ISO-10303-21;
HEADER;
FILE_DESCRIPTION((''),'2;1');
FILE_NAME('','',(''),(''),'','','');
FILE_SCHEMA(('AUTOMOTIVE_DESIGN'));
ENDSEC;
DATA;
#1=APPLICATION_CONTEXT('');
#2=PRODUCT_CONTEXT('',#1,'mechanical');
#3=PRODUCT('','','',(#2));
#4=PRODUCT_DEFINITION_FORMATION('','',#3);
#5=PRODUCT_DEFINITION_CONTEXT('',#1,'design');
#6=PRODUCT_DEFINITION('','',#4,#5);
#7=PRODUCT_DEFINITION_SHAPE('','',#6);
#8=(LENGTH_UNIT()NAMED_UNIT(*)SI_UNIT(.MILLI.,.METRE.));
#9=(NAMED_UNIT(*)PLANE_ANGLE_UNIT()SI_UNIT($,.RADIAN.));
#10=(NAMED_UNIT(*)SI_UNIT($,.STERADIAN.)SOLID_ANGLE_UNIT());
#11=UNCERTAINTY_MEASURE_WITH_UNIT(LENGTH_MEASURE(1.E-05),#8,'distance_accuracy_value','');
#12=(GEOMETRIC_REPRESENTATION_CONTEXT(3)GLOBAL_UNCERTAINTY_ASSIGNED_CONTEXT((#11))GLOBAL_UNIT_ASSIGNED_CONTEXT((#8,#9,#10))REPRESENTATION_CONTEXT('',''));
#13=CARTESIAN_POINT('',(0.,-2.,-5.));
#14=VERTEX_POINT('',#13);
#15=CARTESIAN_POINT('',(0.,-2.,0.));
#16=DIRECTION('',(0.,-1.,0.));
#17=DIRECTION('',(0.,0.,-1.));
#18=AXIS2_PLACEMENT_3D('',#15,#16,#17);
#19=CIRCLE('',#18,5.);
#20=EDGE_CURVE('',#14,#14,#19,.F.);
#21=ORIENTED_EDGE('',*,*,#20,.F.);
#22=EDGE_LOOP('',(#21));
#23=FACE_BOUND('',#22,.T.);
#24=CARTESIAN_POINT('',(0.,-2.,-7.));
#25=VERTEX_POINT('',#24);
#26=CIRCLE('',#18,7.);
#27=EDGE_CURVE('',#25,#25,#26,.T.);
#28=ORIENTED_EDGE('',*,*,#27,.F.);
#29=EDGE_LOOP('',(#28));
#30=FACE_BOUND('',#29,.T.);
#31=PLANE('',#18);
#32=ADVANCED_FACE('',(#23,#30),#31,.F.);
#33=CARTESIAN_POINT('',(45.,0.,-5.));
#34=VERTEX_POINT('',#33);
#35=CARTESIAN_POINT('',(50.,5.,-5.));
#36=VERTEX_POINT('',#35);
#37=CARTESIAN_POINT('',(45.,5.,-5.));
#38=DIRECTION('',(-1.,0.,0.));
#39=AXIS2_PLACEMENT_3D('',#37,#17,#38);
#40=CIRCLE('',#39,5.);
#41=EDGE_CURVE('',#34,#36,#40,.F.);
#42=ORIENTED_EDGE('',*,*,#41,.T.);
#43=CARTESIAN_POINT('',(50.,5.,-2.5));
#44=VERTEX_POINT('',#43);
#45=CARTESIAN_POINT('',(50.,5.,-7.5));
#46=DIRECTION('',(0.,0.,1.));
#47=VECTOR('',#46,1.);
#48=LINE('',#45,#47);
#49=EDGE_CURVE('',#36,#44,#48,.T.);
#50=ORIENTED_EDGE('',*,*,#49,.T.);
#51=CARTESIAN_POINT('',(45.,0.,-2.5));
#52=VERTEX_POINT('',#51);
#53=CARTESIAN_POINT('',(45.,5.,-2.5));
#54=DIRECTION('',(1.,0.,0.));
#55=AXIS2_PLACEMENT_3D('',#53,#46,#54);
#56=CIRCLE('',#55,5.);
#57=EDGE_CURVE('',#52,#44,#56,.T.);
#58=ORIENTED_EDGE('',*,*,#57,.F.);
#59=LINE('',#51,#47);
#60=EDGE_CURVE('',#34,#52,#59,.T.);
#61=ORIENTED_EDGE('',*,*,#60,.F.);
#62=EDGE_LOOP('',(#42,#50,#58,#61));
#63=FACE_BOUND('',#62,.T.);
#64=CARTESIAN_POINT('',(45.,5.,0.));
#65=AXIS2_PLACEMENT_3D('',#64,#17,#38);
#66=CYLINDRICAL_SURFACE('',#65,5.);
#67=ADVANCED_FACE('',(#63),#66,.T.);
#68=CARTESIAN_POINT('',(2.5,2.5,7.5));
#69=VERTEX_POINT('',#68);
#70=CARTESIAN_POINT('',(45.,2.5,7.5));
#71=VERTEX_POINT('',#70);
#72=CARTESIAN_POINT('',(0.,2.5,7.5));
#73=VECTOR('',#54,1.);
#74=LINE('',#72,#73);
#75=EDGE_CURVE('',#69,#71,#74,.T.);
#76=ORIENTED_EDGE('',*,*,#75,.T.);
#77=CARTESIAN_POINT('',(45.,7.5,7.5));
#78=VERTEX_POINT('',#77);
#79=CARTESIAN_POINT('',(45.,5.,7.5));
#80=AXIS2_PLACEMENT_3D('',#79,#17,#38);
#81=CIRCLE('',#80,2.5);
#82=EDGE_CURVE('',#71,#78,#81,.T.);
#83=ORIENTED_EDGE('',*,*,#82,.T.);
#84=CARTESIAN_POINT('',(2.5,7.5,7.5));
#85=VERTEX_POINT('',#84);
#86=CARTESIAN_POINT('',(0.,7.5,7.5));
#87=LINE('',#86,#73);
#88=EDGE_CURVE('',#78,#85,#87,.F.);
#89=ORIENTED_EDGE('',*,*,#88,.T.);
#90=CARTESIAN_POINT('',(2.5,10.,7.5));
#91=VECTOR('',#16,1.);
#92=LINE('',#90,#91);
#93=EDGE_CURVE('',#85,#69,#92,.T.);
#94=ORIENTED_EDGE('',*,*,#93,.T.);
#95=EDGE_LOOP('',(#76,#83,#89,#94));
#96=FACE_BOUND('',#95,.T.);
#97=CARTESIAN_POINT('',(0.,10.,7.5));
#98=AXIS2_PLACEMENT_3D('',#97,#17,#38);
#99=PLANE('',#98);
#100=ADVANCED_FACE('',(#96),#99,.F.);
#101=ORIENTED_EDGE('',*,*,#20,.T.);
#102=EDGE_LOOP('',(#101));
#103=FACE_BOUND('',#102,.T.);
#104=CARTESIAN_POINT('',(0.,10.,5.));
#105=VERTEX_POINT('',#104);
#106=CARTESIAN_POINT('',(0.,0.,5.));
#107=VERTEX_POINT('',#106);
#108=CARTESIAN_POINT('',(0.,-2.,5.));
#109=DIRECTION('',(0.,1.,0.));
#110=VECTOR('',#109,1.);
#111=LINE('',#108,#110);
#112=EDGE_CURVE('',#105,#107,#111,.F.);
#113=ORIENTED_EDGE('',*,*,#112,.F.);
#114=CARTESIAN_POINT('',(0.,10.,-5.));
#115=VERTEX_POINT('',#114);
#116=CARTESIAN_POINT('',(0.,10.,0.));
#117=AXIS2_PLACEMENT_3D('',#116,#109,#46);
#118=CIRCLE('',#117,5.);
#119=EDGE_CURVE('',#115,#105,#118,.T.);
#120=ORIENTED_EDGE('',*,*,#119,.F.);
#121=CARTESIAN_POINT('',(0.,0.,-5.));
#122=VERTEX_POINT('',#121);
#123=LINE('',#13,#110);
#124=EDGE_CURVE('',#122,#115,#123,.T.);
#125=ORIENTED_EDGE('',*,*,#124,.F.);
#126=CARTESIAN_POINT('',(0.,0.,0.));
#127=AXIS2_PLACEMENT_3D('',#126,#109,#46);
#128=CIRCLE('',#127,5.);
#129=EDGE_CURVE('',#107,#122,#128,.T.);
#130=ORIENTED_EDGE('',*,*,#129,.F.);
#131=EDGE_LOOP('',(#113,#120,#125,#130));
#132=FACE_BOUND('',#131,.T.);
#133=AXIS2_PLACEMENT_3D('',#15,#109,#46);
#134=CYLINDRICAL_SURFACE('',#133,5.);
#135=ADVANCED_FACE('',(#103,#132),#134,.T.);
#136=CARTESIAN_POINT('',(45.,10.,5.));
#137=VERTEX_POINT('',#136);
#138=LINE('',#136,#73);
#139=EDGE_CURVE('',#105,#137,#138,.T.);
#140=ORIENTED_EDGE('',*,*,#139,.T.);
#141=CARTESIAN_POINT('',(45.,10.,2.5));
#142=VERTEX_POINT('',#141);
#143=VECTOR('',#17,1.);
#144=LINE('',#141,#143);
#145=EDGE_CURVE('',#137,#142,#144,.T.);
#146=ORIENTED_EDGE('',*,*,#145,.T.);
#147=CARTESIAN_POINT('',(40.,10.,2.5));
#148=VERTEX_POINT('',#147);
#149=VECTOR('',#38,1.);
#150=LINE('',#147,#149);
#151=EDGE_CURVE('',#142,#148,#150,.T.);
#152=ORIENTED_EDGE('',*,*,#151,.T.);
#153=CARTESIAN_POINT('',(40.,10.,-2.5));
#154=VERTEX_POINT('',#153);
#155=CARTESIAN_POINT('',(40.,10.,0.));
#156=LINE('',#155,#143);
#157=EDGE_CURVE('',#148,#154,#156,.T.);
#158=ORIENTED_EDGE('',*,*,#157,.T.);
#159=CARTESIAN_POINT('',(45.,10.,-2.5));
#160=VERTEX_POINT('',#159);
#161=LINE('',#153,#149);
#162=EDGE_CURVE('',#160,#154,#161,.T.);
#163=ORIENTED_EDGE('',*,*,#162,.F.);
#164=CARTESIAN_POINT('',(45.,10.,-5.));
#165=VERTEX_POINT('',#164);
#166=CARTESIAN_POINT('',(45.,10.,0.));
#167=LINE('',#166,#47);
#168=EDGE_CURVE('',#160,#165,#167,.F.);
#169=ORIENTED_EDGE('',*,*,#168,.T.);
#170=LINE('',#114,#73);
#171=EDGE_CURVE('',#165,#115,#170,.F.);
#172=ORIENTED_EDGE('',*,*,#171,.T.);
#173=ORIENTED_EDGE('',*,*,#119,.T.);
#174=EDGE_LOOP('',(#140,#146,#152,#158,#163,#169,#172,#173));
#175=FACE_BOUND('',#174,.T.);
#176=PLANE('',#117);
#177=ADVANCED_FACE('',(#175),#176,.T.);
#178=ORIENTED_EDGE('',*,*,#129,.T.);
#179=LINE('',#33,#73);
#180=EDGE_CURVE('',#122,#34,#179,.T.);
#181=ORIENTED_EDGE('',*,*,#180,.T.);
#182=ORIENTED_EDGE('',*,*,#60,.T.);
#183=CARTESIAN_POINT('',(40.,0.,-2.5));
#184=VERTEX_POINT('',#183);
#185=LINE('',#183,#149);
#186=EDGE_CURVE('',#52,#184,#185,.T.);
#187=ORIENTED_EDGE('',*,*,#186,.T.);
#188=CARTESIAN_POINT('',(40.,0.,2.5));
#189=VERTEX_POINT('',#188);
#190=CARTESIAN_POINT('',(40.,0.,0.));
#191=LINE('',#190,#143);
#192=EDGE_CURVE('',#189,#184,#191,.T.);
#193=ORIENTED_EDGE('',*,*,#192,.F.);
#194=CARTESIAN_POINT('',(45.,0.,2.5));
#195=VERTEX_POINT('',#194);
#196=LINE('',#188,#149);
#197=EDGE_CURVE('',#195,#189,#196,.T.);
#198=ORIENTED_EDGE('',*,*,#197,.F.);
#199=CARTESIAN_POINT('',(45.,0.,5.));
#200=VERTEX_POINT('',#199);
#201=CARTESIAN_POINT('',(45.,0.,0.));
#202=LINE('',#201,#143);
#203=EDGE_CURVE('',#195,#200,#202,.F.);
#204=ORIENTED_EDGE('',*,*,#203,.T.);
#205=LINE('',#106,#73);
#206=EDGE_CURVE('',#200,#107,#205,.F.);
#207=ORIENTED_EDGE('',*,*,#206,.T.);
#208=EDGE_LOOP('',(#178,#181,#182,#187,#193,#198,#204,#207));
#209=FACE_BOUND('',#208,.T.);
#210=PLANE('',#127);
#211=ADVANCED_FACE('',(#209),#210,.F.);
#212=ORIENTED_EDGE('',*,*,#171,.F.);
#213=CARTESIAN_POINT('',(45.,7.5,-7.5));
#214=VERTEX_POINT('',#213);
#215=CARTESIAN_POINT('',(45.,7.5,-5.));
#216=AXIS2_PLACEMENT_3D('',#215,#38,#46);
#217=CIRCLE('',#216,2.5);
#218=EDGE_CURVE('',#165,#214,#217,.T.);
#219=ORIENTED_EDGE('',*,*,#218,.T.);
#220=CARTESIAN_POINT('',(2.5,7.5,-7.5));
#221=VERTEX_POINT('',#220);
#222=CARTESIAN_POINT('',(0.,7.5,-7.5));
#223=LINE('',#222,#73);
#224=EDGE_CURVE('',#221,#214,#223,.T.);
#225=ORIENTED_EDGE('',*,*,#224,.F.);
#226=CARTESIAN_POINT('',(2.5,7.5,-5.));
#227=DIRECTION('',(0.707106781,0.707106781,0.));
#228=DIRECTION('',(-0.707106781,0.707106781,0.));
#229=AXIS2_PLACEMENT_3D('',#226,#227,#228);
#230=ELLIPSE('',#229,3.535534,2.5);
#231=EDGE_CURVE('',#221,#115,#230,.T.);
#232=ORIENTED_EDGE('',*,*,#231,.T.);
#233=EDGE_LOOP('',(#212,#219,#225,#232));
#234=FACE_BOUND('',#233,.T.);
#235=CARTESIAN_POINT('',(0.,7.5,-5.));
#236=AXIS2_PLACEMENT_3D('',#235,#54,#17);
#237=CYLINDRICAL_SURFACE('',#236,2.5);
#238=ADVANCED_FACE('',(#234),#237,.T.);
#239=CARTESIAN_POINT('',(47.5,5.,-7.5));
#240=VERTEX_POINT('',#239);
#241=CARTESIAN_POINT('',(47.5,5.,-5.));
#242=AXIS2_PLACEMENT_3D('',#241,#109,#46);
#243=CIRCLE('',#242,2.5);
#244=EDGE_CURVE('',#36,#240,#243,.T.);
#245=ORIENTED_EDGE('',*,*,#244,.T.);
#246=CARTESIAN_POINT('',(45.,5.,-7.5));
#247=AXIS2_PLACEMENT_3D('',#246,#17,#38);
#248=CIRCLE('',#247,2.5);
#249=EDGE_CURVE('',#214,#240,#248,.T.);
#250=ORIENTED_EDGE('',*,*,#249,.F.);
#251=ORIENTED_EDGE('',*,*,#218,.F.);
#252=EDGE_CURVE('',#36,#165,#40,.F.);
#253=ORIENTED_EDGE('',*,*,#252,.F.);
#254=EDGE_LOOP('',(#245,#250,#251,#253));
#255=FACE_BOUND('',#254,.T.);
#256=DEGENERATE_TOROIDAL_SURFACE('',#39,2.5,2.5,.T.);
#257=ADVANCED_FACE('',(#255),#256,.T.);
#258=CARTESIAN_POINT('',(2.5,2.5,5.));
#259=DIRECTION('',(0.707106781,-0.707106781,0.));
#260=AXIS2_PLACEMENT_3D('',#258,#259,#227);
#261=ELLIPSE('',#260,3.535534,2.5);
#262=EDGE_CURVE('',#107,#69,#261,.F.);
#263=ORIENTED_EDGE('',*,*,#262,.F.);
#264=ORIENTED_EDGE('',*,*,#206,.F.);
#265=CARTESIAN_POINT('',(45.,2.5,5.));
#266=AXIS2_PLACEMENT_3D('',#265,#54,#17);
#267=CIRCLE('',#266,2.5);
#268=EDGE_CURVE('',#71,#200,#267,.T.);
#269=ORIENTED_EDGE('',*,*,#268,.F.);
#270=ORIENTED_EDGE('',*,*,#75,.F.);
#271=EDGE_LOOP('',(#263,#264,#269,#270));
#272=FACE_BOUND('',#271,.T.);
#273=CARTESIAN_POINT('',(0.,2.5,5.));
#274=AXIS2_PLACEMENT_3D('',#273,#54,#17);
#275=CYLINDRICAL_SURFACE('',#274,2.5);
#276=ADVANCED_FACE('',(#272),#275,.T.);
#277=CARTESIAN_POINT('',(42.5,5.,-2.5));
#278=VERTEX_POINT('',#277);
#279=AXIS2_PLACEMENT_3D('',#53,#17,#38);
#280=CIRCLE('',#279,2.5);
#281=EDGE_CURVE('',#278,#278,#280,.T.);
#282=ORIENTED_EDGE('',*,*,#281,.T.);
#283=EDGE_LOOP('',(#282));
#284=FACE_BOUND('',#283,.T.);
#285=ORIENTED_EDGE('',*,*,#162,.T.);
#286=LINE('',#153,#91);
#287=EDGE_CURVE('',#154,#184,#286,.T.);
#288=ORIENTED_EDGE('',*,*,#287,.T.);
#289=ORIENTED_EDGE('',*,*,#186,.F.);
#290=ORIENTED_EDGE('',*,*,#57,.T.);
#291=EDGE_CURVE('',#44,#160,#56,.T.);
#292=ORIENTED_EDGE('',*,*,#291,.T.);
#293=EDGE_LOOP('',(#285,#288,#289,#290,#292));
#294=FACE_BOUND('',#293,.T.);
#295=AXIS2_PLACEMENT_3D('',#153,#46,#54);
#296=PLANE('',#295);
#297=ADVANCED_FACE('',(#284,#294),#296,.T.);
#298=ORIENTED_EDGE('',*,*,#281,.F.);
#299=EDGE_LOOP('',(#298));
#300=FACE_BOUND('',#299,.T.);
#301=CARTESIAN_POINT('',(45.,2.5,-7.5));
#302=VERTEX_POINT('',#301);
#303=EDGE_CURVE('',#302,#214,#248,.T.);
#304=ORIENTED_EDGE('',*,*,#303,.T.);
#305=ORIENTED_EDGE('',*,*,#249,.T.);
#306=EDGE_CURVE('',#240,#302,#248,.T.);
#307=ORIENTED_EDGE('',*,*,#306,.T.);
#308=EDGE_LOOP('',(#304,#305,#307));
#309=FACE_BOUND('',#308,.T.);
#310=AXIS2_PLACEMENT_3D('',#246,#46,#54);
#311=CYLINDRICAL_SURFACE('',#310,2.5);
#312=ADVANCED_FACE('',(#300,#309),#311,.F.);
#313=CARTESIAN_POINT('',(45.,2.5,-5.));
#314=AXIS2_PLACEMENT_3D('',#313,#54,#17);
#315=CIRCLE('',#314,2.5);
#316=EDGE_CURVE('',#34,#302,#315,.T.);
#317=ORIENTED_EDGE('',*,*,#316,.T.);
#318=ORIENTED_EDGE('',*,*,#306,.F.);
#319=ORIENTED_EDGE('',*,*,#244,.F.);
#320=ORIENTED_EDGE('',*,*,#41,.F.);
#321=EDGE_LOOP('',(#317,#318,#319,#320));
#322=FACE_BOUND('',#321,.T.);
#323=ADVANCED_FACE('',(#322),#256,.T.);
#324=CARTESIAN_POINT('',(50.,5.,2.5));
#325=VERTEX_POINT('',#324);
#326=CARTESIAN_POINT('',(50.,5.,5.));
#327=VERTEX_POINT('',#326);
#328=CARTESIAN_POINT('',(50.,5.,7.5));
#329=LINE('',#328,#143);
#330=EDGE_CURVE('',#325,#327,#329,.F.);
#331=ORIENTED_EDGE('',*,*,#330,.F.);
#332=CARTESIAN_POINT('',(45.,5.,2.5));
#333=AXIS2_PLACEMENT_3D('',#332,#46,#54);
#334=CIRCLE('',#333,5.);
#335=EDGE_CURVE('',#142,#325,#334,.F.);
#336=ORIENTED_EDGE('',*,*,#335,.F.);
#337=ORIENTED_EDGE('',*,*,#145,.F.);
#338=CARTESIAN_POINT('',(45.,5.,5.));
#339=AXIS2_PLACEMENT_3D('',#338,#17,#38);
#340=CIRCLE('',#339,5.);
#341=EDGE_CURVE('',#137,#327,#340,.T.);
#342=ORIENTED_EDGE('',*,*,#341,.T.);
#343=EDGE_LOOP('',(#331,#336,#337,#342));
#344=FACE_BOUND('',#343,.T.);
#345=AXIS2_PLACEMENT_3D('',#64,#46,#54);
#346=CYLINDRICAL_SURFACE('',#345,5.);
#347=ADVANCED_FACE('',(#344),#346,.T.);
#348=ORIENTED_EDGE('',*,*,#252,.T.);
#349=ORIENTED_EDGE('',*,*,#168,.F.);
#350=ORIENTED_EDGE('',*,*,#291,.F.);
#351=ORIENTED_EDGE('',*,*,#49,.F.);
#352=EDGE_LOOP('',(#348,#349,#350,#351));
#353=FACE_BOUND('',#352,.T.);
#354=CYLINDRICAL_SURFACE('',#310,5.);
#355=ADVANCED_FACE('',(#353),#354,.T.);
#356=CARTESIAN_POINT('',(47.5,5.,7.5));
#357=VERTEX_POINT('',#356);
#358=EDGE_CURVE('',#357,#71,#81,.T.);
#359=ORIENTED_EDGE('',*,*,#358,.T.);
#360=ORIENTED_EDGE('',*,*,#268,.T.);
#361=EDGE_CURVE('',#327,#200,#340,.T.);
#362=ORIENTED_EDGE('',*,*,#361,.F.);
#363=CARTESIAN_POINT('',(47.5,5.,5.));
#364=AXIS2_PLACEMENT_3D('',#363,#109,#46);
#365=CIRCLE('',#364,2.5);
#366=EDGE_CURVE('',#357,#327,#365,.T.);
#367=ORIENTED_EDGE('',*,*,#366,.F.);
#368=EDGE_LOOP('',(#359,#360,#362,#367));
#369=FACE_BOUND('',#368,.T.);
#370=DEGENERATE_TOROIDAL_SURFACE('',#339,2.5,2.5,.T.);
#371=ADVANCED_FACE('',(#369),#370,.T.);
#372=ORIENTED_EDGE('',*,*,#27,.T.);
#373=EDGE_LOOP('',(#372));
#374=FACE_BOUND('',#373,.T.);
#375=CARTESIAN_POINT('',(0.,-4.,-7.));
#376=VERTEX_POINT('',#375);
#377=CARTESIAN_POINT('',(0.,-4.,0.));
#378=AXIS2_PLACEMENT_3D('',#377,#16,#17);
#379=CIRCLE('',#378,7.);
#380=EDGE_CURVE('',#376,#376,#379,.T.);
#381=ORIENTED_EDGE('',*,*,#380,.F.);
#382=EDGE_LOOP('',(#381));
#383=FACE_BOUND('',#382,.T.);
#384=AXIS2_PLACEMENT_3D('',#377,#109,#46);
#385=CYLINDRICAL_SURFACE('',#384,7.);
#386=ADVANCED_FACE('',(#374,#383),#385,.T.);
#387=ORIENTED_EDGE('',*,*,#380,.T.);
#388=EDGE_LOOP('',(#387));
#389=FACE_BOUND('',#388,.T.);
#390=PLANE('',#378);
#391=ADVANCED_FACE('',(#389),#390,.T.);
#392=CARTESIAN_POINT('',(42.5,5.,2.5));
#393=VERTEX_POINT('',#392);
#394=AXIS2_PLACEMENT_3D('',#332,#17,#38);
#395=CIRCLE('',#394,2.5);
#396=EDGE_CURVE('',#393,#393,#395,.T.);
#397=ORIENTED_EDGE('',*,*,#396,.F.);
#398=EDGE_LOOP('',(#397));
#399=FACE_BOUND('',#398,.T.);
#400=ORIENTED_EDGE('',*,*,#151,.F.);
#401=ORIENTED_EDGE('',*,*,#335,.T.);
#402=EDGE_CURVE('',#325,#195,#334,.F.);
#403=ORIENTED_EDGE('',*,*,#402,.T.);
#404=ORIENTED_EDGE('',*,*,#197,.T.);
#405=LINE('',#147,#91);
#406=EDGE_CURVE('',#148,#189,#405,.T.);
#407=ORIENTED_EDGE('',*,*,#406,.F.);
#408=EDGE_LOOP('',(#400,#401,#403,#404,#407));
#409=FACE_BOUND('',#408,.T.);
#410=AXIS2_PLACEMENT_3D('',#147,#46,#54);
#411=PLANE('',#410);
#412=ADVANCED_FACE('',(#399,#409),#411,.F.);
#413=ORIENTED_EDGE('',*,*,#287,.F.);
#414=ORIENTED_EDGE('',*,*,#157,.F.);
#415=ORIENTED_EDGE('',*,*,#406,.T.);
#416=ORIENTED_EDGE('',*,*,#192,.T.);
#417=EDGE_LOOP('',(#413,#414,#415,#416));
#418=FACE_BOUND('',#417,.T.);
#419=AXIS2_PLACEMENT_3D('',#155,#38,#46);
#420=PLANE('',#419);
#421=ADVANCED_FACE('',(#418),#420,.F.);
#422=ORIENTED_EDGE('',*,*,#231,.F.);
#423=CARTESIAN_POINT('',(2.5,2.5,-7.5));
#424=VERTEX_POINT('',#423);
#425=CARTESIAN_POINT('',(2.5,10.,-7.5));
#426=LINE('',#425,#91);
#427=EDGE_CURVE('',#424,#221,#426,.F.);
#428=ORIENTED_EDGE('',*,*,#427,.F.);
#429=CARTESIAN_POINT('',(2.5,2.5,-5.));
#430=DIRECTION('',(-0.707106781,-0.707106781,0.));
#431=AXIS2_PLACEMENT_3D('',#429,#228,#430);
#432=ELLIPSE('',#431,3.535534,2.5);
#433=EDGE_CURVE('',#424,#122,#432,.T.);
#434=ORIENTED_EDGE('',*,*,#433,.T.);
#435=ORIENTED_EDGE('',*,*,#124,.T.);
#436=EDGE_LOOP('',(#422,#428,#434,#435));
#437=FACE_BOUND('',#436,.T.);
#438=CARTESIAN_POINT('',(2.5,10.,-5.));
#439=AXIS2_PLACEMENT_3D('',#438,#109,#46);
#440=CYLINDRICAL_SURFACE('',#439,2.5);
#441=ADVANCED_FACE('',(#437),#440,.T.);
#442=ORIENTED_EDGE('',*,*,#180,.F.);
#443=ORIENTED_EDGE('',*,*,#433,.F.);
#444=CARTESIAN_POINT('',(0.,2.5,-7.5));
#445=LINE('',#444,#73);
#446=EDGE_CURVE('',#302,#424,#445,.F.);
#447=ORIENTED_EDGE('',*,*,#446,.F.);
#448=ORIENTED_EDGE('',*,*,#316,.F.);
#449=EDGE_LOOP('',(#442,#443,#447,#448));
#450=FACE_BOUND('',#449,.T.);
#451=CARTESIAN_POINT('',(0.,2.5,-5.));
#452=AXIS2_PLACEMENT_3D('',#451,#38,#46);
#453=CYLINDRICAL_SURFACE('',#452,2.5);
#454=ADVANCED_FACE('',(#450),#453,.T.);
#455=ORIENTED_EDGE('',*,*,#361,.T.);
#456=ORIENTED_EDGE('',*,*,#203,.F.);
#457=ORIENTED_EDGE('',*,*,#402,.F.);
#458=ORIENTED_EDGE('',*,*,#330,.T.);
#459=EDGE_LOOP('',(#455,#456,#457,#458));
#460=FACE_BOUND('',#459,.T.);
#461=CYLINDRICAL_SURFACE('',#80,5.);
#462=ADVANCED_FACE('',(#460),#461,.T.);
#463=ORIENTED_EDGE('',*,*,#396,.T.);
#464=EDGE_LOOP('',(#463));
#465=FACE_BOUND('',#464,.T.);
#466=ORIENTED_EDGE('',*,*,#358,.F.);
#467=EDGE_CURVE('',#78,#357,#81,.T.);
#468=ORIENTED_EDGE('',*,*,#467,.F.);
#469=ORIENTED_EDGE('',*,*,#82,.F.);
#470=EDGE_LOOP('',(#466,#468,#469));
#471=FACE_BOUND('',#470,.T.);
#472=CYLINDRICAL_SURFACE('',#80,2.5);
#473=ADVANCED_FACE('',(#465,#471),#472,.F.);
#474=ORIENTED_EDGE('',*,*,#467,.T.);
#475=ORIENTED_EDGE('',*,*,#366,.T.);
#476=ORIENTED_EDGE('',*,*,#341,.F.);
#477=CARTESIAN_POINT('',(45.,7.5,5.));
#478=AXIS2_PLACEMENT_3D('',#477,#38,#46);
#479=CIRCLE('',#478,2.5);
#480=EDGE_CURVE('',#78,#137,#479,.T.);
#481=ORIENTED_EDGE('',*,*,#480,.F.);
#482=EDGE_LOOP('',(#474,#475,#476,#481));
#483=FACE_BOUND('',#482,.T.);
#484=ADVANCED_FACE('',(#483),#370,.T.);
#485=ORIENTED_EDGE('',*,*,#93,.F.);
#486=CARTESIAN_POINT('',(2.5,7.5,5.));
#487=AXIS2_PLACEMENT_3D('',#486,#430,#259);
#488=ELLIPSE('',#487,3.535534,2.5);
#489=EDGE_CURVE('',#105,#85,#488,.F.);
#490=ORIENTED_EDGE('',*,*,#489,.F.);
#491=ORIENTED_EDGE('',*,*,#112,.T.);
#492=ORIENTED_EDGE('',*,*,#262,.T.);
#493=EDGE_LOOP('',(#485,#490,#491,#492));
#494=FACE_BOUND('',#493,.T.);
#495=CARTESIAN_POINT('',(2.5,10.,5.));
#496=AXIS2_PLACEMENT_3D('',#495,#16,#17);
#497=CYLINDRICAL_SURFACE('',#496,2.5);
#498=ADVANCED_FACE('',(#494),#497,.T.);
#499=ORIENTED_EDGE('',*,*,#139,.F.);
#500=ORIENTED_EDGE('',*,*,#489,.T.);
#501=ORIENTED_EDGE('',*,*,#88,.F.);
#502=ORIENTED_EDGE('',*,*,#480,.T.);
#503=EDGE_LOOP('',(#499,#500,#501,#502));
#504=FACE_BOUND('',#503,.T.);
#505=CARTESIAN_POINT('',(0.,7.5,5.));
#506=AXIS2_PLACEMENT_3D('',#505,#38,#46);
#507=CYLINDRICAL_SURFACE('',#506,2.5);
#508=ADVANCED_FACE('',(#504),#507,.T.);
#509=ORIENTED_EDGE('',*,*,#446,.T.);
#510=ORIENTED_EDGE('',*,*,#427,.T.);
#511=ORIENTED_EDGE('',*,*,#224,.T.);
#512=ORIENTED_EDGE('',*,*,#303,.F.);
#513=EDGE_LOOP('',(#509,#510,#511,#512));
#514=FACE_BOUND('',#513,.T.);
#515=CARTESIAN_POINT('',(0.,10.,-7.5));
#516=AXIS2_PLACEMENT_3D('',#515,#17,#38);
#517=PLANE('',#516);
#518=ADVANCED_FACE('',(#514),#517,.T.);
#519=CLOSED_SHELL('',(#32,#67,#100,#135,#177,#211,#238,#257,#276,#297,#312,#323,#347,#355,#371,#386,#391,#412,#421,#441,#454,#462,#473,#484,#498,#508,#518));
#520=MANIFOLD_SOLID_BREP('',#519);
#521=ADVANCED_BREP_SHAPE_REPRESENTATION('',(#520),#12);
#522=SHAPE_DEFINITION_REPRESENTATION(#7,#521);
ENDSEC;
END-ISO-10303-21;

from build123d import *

# Parameters (mm, degrees)
BOSS_EXTRUDE1_DEPTH = 10
SKETCH2_R           = 2.5
CUT_EXTRUDE1_DEPTH  = 52.23475383
SKETCH3_R           = 5
BOSS_EXTRUDE2_DEPTH = 12
SKETCH4_R           = 7
BOSS_EXTRUDE3_DEPTH = 2
FILLET1_R           = 5
FILLET2_R           = 2.5


with BuildPart() as part:
    # Sketch1 → Boss-Extrude1 (new body)
    with BuildSketch(Plane(origin=(0, 0, 0), x_dir=(1, 0, 0), z_dir=(0, 1, 0))):
        Polygon((40, 0), (40, -2.5), (50, -2.5), (50, -7.5), (0, -7.5), (0, 0), align=None)
    boss_extrude1 = extrude(amount=BOSS_EXTRUDE1_DEPTH)

    # Sketch2 → Cut-Extrude1 (cut, through all)
    with BuildSketch(Plane(origin=(0, 0, 2.5), x_dir=(-1, 0, 0), z_dir=(0, 0, -1))):
        with Locations((-45, 5)):
            Circle(SKETCH2_R)
    cut_extrude1 = extrude(amount=-CUT_EXTRUDE1_DEPTH, mode=Mode.SUBTRACT)

    # Mirror1: Boss-Extrude1, Cut-Extrude1 across plane
    add(boss_extrude1.mirror(Plane(origin=(0, 10, 0), x_dir=(1, 0, 0), z_dir=(0, 0, 1))))
    add(cut_extrude1.mirror(Plane(origin=(0, 10, 0), x_dir=(1, 0, 0), z_dir=(0, 0, 1))), mode=Mode.SUBTRACT)

    # Sketch3 → Boss-Extrude2 (add)
    with BuildSketch(Plane(origin=(0, 10, 0), x_dir=(1, 0, 0), z_dir=(0, 1, 0))):
        with Locations(Location((0, 0, 0), (0, 0, 270))):
            Circle(SKETCH3_R)
    extrude(amount=-BOSS_EXTRUDE2_DEPTH)

    # Sketch4 → Boss-Extrude3 (add)
    with BuildSketch(Plane.XZ.offset(2)):
        with Locations(Location((0, 0, 0), (0, 0, 270))):
            Circle(SKETCH4_R)
    extrude(amount=BOSS_EXTRUDE3_DEPTH)

    # Fillet1
    fillet1_edges = [part.edges().sort_by_distance(p)[0] for p in [
        (50, 0, -5),
        (50, 10, -5),
        (50, 0, 5),
        (50, 10, 5),
    ]]
    fillet(fillet1_edges, radius=FILLET1_R - 0.0001)  # a hair under: the kernel refuses the full size

    # Fillet2
    fillet2_edges = [part.edges().sort_by_distance(p)[0] for p in [
        (22.50005, 10, -7.5),
        (48.535563195, 8.535563195, -7.5),
        (48.535563195, 1.464436805, -7.5),
        (22.50005, 10, 7.5),
        (48.535563195, 8.535563195, 7.5),
        (48.535563195, 1.464436805, 7.5),
        (22.50005, 0, -7.5),
        (0, 5, -7.5),
        (0, 5, 7.5),
        (22.50005, 0, 7.5),
    ]]
    fillet(fillet2_edges, radius=FILLET2_R - 0.0001)  # a hair under: the kernel refuses the full size


solid = part.part
